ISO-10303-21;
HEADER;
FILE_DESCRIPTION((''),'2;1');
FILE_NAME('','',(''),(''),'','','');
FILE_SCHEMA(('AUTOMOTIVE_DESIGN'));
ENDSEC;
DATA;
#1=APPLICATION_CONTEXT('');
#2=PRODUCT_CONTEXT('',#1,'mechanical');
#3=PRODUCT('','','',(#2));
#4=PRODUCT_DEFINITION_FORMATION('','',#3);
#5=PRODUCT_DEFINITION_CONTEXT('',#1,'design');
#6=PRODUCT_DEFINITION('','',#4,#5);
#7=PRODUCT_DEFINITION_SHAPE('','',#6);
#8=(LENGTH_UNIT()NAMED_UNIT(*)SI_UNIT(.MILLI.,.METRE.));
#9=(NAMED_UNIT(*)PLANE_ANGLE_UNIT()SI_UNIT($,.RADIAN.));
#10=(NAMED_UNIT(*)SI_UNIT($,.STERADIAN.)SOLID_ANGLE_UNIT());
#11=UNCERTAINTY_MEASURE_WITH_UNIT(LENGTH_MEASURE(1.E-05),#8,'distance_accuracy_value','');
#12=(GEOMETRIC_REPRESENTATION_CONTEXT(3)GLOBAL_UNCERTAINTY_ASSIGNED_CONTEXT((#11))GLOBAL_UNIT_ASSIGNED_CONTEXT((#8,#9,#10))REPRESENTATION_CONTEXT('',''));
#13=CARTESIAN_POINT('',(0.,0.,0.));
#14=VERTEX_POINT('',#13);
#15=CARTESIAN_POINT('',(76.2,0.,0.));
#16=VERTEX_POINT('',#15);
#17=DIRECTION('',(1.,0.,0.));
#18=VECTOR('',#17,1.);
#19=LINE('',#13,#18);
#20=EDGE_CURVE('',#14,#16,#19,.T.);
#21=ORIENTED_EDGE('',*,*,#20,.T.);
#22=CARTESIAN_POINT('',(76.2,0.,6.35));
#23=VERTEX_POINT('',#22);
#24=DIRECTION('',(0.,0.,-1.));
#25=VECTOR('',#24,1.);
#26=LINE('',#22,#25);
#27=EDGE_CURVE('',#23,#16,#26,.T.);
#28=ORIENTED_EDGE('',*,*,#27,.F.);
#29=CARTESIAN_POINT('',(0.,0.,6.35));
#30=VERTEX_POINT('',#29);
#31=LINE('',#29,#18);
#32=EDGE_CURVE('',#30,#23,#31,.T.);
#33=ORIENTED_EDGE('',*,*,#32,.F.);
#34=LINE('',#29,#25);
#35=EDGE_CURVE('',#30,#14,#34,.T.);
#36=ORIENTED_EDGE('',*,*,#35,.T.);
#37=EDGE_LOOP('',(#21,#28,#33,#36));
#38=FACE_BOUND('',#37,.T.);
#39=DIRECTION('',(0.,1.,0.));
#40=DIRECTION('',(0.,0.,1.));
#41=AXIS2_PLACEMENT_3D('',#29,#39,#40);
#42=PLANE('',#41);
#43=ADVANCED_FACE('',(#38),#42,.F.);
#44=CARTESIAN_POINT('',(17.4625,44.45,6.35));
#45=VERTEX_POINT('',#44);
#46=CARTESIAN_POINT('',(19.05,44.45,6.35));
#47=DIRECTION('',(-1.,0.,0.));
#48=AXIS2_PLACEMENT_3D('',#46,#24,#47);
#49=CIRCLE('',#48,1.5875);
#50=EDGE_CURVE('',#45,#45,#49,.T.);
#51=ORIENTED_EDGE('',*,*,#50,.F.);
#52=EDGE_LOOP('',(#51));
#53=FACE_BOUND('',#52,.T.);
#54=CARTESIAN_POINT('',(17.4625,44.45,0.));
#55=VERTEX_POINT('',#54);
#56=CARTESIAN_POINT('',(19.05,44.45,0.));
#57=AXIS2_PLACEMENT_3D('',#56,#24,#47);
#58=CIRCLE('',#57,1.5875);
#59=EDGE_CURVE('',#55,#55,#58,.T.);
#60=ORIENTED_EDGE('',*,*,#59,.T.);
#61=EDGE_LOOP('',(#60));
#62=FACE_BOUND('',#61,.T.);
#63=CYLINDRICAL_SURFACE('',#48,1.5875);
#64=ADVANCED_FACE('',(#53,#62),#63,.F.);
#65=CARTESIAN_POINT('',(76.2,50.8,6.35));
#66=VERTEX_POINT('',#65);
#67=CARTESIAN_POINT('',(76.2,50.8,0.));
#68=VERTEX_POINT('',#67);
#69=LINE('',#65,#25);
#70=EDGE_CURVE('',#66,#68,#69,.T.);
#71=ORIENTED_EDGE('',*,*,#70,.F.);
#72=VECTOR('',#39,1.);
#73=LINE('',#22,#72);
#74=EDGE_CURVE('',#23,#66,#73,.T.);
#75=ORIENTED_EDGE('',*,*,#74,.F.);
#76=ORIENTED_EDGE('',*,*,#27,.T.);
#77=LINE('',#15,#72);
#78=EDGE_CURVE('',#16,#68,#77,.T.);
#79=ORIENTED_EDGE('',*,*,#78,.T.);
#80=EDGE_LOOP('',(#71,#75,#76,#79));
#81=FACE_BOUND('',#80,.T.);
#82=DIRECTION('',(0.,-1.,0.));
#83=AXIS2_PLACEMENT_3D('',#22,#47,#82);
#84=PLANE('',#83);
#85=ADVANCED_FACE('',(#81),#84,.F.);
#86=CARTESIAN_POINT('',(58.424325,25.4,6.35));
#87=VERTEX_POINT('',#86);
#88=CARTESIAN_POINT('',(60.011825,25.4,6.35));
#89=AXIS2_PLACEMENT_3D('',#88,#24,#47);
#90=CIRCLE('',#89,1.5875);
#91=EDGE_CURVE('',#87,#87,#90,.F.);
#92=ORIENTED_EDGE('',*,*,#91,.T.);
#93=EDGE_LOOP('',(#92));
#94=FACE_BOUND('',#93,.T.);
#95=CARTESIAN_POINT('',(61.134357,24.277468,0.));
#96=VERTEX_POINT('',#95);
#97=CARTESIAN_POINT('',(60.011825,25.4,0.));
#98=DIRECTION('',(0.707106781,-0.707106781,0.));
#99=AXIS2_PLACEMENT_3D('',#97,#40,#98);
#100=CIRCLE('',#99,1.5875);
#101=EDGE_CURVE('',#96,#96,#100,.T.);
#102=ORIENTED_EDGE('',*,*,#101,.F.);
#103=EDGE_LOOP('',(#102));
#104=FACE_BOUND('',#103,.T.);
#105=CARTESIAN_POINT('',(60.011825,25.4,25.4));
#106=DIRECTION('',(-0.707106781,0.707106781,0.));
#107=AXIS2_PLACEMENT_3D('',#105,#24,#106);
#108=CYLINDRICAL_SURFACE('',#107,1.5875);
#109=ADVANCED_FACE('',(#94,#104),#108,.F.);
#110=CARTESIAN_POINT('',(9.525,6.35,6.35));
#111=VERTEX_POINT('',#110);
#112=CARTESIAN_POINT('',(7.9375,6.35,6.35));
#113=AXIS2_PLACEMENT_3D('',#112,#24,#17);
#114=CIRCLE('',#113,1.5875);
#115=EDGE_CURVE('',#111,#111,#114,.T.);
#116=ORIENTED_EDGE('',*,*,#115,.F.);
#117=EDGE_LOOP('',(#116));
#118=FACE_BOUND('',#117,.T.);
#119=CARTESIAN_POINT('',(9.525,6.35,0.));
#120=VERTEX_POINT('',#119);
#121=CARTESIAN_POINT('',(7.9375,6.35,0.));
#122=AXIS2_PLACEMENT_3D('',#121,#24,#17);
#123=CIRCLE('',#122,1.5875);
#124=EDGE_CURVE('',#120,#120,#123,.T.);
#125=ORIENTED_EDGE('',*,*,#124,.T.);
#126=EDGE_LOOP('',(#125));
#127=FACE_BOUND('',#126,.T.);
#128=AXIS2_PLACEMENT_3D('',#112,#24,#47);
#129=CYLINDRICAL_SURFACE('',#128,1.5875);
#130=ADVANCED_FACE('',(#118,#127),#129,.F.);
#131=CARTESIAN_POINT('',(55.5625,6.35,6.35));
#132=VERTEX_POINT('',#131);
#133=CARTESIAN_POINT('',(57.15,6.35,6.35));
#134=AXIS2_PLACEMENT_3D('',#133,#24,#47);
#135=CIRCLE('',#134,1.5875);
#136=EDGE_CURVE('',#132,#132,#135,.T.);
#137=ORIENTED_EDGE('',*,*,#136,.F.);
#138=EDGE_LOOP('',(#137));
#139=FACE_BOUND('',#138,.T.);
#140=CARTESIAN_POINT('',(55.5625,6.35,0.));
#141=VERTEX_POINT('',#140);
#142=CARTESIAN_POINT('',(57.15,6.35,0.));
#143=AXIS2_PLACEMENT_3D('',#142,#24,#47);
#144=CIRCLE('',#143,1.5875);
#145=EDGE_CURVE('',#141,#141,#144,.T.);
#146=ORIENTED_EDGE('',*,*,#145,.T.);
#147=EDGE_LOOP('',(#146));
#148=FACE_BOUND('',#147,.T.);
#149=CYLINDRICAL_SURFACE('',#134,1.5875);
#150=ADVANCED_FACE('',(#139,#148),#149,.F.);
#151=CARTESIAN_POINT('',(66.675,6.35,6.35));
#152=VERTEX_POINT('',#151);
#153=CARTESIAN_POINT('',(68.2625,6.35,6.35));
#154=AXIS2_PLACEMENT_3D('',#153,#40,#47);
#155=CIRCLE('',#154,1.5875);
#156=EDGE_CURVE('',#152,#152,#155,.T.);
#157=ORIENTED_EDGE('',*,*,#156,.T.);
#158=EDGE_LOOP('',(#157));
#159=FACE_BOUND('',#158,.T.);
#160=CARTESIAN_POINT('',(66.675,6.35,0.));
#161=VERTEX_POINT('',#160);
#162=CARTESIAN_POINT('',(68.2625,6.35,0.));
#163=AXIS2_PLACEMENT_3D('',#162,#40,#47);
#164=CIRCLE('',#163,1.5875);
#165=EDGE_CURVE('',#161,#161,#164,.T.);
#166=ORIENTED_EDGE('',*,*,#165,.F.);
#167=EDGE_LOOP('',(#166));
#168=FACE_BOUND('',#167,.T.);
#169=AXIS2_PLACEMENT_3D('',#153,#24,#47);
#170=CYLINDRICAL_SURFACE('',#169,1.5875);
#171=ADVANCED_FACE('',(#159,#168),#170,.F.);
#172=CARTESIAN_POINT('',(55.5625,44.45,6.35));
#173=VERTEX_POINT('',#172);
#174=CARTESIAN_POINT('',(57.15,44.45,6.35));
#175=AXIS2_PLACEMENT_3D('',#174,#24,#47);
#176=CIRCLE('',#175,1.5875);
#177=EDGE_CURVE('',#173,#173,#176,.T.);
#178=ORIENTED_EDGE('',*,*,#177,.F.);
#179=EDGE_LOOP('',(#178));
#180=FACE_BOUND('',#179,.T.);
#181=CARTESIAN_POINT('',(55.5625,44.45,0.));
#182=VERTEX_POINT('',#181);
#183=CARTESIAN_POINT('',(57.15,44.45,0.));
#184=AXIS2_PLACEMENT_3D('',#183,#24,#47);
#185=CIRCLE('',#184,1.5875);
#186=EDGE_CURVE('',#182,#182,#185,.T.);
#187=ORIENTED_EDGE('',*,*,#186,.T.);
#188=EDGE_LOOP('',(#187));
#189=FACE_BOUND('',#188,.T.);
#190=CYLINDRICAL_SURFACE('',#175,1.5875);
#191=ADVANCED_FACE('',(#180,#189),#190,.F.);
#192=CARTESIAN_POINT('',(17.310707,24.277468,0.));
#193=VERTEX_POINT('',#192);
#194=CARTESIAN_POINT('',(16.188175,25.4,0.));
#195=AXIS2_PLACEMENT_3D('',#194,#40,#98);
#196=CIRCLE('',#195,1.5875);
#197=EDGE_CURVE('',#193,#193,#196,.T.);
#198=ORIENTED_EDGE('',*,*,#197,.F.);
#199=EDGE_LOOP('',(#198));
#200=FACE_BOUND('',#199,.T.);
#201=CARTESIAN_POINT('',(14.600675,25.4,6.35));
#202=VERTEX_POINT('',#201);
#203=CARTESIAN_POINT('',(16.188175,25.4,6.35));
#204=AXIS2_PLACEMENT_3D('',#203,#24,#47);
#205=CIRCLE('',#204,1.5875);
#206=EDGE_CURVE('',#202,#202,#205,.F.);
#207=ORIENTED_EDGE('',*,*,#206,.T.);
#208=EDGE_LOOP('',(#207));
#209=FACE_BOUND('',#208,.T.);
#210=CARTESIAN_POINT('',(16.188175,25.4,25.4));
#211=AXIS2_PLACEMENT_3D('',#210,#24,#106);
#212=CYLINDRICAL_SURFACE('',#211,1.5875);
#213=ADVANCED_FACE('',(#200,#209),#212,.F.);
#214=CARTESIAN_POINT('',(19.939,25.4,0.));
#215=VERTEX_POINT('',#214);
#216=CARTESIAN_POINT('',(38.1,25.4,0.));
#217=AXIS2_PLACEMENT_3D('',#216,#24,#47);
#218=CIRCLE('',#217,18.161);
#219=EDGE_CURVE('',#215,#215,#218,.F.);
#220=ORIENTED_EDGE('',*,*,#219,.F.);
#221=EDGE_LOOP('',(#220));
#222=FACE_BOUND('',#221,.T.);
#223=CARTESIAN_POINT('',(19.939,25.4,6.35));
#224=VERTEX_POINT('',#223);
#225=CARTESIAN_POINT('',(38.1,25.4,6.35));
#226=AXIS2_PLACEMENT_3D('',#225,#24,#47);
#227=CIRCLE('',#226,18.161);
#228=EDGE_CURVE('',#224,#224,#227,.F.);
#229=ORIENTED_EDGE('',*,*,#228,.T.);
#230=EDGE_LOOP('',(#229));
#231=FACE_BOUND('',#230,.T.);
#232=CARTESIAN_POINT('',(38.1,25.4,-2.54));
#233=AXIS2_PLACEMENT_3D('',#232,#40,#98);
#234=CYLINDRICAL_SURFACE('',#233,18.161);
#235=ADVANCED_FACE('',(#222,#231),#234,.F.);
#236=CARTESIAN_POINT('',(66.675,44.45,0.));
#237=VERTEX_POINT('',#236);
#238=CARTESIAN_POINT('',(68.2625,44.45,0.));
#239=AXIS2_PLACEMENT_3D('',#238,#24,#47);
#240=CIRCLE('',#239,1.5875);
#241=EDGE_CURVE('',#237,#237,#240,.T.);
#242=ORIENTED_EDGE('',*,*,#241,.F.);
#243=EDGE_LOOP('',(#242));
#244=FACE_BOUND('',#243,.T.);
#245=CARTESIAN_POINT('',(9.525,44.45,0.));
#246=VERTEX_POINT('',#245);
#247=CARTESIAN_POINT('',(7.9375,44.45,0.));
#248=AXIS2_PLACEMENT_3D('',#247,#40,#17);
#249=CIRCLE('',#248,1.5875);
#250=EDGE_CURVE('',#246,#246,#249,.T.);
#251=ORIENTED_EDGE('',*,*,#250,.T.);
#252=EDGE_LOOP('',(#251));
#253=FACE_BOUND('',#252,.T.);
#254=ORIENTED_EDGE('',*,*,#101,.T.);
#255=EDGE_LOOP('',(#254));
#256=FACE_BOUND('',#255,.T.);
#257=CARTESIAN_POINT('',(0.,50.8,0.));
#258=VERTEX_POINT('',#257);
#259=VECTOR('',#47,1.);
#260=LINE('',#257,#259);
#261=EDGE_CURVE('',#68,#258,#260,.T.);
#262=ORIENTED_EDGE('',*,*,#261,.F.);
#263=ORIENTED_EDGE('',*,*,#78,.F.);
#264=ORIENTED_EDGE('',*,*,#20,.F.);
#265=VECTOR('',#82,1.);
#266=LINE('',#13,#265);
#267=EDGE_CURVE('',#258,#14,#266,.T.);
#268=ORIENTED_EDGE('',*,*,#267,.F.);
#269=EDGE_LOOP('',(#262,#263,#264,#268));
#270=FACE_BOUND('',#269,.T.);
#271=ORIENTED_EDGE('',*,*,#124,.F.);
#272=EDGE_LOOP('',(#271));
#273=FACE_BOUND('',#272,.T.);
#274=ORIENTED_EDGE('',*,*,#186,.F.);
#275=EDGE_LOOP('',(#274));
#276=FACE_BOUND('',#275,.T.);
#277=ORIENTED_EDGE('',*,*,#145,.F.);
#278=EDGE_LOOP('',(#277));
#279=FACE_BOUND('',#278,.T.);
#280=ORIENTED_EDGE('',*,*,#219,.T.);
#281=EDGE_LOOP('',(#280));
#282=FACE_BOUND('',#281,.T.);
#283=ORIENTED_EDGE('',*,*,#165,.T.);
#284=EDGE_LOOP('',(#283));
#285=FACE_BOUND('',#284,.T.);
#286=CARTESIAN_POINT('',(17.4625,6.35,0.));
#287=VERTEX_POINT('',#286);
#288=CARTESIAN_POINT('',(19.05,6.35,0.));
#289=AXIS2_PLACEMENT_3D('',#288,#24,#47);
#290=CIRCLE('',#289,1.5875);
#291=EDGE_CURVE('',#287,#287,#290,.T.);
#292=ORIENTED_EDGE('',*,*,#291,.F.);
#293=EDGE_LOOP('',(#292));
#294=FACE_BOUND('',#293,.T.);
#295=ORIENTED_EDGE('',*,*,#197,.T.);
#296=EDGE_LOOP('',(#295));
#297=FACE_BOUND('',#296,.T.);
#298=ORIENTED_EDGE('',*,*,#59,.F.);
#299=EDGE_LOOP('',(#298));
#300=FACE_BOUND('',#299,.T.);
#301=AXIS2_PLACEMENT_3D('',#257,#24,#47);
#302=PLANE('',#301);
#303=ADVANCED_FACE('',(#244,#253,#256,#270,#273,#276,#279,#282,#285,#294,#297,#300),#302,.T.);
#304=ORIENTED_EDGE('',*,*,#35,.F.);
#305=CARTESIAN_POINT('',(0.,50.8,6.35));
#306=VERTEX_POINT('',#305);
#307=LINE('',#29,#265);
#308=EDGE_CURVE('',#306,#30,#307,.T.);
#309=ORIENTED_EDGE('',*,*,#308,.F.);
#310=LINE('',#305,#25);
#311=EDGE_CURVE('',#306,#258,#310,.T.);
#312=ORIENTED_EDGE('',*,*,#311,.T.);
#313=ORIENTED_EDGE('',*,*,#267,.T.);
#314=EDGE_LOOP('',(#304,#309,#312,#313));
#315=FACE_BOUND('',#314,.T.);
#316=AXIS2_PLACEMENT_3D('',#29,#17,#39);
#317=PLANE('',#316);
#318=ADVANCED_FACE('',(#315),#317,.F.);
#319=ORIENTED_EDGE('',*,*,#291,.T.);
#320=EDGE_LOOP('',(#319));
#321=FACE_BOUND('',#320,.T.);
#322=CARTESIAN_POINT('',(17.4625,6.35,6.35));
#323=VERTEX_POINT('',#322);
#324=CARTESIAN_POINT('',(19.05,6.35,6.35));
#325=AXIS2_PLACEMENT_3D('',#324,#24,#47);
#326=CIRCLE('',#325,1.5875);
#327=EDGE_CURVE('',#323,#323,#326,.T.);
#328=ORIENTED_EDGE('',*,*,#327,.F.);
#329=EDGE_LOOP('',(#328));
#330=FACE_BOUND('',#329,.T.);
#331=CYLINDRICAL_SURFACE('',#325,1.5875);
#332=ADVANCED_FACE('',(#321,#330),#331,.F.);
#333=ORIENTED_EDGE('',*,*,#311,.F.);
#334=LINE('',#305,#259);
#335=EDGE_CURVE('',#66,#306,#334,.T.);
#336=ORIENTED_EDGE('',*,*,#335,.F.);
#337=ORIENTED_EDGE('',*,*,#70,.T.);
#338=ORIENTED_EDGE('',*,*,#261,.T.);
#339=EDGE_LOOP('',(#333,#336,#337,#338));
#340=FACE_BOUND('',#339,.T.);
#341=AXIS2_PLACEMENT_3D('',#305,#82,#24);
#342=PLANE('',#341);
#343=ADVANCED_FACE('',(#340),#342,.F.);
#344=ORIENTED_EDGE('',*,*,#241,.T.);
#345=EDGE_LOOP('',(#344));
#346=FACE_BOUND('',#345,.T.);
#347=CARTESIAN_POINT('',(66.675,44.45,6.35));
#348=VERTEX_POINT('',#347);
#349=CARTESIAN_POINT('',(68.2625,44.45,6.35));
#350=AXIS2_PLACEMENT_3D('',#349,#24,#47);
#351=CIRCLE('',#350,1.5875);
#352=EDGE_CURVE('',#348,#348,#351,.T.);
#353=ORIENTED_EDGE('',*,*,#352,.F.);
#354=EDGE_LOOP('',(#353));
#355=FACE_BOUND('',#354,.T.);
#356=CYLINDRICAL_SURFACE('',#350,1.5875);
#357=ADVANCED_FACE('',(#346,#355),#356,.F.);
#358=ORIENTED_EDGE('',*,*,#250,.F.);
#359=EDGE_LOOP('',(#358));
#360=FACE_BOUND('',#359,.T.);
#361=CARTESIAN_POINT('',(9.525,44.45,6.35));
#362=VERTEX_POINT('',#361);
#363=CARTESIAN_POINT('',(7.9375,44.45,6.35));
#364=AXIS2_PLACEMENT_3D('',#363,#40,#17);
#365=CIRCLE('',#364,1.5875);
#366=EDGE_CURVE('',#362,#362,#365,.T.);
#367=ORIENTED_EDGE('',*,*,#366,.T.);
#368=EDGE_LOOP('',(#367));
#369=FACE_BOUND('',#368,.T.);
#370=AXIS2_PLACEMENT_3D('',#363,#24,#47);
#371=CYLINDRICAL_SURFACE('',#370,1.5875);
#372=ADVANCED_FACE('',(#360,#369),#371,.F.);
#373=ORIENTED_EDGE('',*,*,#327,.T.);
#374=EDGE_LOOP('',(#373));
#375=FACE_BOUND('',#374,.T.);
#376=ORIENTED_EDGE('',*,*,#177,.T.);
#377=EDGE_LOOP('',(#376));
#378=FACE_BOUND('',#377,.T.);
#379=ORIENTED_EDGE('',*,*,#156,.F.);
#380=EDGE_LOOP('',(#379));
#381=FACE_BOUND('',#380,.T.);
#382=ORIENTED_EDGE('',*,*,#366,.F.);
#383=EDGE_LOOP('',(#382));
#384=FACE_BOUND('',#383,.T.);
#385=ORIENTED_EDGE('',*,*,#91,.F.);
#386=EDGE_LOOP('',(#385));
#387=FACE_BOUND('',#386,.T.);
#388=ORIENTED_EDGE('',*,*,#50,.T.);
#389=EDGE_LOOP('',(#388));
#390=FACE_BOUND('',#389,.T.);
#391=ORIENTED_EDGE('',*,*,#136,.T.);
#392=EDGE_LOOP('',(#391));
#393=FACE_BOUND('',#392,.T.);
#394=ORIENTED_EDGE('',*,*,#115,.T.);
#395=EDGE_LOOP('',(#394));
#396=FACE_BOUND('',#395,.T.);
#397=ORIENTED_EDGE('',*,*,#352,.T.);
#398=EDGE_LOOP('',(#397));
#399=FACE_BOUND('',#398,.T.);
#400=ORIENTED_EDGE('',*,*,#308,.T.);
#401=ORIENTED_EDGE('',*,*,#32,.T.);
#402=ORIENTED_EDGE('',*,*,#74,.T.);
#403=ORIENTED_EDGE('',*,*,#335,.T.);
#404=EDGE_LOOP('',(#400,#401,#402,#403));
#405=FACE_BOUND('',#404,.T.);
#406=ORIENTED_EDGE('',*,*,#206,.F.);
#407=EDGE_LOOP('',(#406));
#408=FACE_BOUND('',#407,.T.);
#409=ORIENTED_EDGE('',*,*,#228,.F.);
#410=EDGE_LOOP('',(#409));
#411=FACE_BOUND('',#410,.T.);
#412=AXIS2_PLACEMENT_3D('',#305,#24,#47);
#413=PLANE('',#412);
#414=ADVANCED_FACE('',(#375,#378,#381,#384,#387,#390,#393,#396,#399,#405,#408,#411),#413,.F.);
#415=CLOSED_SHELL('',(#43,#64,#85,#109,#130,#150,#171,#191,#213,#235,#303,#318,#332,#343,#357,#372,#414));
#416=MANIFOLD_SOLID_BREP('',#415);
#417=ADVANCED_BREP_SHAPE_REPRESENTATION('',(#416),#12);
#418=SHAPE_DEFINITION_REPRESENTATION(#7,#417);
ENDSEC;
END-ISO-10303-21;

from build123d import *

# Parameters (mm, degrees)
SKETCH1_W               = 76.2
SKETCH1_H               = 50.8
BOSS_EXTRUDE1_DEPTH     = 6.35
CAVITY5_OUTLINE_R       = 18.161
CAVITY5_OUTLINE_R_2     = 1.5875
CAVITY5_DEPTH           = 6.35
SKETCH3_R               = 1.5875
CUT_EXTRUDE1_DEPTH      = 92.800885072
MIRROR2_COPY_1_SKETCH_R = 1.5875
MIRROR2_COPY_1_DEPTH    = 92.800885072
SKETCH4_R               = 1.5875
CUT_EXTRUDE2_DEPTH      = 92.800885072


# Read off the part's stored shape, not the designer's step: Cavity5
with BuildPart() as part:
    # Sketch1 → Boss-Extrude1 (new body)
    with BuildSketch(Plane.XY):
        with Locations((38.1, 25.4)):
            Rectangle(SKETCH1_W, SKETCH1_H)
    extrude(amount=BOSS_EXTRUDE1_DEPTH)

    # Cavity5 outline → Cavity5 (cut)
    with BuildSketch(Plane.XY):
        with Locations((38.1, 25.4)):
            Circle(CAVITY5_OUTLINE_R)
        with Locations((16.188175065, 25.4)):
            Circle(CAVITY5_OUTLINE_R_2)
        with Locations((60.011824935, 25.4)):
            Circle(CAVITY5_OUTLINE_R_2)
    extrude(amount=CAVITY5_DEPTH, mode=Mode.SUBTRACT)

    # Sketch3 → Cut-Extrude1 (cut, through all)
    with BuildSketch(Plane(origin=(0, 0, 0), x_dir=(-1, 0, 0), z_dir=(0, 0, -1))):
        with Locations((-68.2625, 44.45)):
            Circle(SKETCH3_R)
    cut_extrude1 = extrude(amount=-CUT_EXTRUDE1_DEPTH, mode=Mode.SUBTRACT)

    # Mirror1: Cut-Extrude1 across plane
    add(cut_extrude1.mirror(Plane(origin=(38.1, 0, 0), x_dir=(0, 0, 1), z_dir=(1, 0, 0))), mode=Mode.SUBTRACT)

    # Mirror2: Cut-Extrude1 across plane
    add(cut_extrude1.mirror(Plane.ZX.offset(25.4)), mode=Mode.SUBTRACT)

    # Mirror2 copy 1 sketch → Mirror2 copy 1 (cut, through all)
    with BuildSketch(Plane(origin=(76.2, 50.8, 0), x_dir=(1, 0, 0), z_dir=(0, 0, -1))):
        with Locations((-68.2625, 44.45)):
            Circle(MIRROR2_COPY_1_SKETCH_R)
    extrude(amount=-MIRROR2_COPY_1_DEPTH, mode=Mode.SUBTRACT)

    # Sketch4 → Cut-Extrude2 (cut, through all)
    with BuildSketch(Plane(origin=(0, 0, 0), x_dir=(-1, 0, 0), z_dir=(0, 0, -1))):
        with Locations((-19.05, 44.45)):
            Circle(SKETCH4_R)
        with Locations((-57.15, 44.45)):
            Circle(SKETCH4_R)
        with Locations((-57.15, 6.35)):
            Circle(SKETCH4_R)
        with Locations((-19.05, 6.35)):
            Circle(SKETCH4_R)
    extrude(amount=-CUT_EXTRUDE2_DEPTH, mode=Mode.SUBTRACT)


solid = part.part
